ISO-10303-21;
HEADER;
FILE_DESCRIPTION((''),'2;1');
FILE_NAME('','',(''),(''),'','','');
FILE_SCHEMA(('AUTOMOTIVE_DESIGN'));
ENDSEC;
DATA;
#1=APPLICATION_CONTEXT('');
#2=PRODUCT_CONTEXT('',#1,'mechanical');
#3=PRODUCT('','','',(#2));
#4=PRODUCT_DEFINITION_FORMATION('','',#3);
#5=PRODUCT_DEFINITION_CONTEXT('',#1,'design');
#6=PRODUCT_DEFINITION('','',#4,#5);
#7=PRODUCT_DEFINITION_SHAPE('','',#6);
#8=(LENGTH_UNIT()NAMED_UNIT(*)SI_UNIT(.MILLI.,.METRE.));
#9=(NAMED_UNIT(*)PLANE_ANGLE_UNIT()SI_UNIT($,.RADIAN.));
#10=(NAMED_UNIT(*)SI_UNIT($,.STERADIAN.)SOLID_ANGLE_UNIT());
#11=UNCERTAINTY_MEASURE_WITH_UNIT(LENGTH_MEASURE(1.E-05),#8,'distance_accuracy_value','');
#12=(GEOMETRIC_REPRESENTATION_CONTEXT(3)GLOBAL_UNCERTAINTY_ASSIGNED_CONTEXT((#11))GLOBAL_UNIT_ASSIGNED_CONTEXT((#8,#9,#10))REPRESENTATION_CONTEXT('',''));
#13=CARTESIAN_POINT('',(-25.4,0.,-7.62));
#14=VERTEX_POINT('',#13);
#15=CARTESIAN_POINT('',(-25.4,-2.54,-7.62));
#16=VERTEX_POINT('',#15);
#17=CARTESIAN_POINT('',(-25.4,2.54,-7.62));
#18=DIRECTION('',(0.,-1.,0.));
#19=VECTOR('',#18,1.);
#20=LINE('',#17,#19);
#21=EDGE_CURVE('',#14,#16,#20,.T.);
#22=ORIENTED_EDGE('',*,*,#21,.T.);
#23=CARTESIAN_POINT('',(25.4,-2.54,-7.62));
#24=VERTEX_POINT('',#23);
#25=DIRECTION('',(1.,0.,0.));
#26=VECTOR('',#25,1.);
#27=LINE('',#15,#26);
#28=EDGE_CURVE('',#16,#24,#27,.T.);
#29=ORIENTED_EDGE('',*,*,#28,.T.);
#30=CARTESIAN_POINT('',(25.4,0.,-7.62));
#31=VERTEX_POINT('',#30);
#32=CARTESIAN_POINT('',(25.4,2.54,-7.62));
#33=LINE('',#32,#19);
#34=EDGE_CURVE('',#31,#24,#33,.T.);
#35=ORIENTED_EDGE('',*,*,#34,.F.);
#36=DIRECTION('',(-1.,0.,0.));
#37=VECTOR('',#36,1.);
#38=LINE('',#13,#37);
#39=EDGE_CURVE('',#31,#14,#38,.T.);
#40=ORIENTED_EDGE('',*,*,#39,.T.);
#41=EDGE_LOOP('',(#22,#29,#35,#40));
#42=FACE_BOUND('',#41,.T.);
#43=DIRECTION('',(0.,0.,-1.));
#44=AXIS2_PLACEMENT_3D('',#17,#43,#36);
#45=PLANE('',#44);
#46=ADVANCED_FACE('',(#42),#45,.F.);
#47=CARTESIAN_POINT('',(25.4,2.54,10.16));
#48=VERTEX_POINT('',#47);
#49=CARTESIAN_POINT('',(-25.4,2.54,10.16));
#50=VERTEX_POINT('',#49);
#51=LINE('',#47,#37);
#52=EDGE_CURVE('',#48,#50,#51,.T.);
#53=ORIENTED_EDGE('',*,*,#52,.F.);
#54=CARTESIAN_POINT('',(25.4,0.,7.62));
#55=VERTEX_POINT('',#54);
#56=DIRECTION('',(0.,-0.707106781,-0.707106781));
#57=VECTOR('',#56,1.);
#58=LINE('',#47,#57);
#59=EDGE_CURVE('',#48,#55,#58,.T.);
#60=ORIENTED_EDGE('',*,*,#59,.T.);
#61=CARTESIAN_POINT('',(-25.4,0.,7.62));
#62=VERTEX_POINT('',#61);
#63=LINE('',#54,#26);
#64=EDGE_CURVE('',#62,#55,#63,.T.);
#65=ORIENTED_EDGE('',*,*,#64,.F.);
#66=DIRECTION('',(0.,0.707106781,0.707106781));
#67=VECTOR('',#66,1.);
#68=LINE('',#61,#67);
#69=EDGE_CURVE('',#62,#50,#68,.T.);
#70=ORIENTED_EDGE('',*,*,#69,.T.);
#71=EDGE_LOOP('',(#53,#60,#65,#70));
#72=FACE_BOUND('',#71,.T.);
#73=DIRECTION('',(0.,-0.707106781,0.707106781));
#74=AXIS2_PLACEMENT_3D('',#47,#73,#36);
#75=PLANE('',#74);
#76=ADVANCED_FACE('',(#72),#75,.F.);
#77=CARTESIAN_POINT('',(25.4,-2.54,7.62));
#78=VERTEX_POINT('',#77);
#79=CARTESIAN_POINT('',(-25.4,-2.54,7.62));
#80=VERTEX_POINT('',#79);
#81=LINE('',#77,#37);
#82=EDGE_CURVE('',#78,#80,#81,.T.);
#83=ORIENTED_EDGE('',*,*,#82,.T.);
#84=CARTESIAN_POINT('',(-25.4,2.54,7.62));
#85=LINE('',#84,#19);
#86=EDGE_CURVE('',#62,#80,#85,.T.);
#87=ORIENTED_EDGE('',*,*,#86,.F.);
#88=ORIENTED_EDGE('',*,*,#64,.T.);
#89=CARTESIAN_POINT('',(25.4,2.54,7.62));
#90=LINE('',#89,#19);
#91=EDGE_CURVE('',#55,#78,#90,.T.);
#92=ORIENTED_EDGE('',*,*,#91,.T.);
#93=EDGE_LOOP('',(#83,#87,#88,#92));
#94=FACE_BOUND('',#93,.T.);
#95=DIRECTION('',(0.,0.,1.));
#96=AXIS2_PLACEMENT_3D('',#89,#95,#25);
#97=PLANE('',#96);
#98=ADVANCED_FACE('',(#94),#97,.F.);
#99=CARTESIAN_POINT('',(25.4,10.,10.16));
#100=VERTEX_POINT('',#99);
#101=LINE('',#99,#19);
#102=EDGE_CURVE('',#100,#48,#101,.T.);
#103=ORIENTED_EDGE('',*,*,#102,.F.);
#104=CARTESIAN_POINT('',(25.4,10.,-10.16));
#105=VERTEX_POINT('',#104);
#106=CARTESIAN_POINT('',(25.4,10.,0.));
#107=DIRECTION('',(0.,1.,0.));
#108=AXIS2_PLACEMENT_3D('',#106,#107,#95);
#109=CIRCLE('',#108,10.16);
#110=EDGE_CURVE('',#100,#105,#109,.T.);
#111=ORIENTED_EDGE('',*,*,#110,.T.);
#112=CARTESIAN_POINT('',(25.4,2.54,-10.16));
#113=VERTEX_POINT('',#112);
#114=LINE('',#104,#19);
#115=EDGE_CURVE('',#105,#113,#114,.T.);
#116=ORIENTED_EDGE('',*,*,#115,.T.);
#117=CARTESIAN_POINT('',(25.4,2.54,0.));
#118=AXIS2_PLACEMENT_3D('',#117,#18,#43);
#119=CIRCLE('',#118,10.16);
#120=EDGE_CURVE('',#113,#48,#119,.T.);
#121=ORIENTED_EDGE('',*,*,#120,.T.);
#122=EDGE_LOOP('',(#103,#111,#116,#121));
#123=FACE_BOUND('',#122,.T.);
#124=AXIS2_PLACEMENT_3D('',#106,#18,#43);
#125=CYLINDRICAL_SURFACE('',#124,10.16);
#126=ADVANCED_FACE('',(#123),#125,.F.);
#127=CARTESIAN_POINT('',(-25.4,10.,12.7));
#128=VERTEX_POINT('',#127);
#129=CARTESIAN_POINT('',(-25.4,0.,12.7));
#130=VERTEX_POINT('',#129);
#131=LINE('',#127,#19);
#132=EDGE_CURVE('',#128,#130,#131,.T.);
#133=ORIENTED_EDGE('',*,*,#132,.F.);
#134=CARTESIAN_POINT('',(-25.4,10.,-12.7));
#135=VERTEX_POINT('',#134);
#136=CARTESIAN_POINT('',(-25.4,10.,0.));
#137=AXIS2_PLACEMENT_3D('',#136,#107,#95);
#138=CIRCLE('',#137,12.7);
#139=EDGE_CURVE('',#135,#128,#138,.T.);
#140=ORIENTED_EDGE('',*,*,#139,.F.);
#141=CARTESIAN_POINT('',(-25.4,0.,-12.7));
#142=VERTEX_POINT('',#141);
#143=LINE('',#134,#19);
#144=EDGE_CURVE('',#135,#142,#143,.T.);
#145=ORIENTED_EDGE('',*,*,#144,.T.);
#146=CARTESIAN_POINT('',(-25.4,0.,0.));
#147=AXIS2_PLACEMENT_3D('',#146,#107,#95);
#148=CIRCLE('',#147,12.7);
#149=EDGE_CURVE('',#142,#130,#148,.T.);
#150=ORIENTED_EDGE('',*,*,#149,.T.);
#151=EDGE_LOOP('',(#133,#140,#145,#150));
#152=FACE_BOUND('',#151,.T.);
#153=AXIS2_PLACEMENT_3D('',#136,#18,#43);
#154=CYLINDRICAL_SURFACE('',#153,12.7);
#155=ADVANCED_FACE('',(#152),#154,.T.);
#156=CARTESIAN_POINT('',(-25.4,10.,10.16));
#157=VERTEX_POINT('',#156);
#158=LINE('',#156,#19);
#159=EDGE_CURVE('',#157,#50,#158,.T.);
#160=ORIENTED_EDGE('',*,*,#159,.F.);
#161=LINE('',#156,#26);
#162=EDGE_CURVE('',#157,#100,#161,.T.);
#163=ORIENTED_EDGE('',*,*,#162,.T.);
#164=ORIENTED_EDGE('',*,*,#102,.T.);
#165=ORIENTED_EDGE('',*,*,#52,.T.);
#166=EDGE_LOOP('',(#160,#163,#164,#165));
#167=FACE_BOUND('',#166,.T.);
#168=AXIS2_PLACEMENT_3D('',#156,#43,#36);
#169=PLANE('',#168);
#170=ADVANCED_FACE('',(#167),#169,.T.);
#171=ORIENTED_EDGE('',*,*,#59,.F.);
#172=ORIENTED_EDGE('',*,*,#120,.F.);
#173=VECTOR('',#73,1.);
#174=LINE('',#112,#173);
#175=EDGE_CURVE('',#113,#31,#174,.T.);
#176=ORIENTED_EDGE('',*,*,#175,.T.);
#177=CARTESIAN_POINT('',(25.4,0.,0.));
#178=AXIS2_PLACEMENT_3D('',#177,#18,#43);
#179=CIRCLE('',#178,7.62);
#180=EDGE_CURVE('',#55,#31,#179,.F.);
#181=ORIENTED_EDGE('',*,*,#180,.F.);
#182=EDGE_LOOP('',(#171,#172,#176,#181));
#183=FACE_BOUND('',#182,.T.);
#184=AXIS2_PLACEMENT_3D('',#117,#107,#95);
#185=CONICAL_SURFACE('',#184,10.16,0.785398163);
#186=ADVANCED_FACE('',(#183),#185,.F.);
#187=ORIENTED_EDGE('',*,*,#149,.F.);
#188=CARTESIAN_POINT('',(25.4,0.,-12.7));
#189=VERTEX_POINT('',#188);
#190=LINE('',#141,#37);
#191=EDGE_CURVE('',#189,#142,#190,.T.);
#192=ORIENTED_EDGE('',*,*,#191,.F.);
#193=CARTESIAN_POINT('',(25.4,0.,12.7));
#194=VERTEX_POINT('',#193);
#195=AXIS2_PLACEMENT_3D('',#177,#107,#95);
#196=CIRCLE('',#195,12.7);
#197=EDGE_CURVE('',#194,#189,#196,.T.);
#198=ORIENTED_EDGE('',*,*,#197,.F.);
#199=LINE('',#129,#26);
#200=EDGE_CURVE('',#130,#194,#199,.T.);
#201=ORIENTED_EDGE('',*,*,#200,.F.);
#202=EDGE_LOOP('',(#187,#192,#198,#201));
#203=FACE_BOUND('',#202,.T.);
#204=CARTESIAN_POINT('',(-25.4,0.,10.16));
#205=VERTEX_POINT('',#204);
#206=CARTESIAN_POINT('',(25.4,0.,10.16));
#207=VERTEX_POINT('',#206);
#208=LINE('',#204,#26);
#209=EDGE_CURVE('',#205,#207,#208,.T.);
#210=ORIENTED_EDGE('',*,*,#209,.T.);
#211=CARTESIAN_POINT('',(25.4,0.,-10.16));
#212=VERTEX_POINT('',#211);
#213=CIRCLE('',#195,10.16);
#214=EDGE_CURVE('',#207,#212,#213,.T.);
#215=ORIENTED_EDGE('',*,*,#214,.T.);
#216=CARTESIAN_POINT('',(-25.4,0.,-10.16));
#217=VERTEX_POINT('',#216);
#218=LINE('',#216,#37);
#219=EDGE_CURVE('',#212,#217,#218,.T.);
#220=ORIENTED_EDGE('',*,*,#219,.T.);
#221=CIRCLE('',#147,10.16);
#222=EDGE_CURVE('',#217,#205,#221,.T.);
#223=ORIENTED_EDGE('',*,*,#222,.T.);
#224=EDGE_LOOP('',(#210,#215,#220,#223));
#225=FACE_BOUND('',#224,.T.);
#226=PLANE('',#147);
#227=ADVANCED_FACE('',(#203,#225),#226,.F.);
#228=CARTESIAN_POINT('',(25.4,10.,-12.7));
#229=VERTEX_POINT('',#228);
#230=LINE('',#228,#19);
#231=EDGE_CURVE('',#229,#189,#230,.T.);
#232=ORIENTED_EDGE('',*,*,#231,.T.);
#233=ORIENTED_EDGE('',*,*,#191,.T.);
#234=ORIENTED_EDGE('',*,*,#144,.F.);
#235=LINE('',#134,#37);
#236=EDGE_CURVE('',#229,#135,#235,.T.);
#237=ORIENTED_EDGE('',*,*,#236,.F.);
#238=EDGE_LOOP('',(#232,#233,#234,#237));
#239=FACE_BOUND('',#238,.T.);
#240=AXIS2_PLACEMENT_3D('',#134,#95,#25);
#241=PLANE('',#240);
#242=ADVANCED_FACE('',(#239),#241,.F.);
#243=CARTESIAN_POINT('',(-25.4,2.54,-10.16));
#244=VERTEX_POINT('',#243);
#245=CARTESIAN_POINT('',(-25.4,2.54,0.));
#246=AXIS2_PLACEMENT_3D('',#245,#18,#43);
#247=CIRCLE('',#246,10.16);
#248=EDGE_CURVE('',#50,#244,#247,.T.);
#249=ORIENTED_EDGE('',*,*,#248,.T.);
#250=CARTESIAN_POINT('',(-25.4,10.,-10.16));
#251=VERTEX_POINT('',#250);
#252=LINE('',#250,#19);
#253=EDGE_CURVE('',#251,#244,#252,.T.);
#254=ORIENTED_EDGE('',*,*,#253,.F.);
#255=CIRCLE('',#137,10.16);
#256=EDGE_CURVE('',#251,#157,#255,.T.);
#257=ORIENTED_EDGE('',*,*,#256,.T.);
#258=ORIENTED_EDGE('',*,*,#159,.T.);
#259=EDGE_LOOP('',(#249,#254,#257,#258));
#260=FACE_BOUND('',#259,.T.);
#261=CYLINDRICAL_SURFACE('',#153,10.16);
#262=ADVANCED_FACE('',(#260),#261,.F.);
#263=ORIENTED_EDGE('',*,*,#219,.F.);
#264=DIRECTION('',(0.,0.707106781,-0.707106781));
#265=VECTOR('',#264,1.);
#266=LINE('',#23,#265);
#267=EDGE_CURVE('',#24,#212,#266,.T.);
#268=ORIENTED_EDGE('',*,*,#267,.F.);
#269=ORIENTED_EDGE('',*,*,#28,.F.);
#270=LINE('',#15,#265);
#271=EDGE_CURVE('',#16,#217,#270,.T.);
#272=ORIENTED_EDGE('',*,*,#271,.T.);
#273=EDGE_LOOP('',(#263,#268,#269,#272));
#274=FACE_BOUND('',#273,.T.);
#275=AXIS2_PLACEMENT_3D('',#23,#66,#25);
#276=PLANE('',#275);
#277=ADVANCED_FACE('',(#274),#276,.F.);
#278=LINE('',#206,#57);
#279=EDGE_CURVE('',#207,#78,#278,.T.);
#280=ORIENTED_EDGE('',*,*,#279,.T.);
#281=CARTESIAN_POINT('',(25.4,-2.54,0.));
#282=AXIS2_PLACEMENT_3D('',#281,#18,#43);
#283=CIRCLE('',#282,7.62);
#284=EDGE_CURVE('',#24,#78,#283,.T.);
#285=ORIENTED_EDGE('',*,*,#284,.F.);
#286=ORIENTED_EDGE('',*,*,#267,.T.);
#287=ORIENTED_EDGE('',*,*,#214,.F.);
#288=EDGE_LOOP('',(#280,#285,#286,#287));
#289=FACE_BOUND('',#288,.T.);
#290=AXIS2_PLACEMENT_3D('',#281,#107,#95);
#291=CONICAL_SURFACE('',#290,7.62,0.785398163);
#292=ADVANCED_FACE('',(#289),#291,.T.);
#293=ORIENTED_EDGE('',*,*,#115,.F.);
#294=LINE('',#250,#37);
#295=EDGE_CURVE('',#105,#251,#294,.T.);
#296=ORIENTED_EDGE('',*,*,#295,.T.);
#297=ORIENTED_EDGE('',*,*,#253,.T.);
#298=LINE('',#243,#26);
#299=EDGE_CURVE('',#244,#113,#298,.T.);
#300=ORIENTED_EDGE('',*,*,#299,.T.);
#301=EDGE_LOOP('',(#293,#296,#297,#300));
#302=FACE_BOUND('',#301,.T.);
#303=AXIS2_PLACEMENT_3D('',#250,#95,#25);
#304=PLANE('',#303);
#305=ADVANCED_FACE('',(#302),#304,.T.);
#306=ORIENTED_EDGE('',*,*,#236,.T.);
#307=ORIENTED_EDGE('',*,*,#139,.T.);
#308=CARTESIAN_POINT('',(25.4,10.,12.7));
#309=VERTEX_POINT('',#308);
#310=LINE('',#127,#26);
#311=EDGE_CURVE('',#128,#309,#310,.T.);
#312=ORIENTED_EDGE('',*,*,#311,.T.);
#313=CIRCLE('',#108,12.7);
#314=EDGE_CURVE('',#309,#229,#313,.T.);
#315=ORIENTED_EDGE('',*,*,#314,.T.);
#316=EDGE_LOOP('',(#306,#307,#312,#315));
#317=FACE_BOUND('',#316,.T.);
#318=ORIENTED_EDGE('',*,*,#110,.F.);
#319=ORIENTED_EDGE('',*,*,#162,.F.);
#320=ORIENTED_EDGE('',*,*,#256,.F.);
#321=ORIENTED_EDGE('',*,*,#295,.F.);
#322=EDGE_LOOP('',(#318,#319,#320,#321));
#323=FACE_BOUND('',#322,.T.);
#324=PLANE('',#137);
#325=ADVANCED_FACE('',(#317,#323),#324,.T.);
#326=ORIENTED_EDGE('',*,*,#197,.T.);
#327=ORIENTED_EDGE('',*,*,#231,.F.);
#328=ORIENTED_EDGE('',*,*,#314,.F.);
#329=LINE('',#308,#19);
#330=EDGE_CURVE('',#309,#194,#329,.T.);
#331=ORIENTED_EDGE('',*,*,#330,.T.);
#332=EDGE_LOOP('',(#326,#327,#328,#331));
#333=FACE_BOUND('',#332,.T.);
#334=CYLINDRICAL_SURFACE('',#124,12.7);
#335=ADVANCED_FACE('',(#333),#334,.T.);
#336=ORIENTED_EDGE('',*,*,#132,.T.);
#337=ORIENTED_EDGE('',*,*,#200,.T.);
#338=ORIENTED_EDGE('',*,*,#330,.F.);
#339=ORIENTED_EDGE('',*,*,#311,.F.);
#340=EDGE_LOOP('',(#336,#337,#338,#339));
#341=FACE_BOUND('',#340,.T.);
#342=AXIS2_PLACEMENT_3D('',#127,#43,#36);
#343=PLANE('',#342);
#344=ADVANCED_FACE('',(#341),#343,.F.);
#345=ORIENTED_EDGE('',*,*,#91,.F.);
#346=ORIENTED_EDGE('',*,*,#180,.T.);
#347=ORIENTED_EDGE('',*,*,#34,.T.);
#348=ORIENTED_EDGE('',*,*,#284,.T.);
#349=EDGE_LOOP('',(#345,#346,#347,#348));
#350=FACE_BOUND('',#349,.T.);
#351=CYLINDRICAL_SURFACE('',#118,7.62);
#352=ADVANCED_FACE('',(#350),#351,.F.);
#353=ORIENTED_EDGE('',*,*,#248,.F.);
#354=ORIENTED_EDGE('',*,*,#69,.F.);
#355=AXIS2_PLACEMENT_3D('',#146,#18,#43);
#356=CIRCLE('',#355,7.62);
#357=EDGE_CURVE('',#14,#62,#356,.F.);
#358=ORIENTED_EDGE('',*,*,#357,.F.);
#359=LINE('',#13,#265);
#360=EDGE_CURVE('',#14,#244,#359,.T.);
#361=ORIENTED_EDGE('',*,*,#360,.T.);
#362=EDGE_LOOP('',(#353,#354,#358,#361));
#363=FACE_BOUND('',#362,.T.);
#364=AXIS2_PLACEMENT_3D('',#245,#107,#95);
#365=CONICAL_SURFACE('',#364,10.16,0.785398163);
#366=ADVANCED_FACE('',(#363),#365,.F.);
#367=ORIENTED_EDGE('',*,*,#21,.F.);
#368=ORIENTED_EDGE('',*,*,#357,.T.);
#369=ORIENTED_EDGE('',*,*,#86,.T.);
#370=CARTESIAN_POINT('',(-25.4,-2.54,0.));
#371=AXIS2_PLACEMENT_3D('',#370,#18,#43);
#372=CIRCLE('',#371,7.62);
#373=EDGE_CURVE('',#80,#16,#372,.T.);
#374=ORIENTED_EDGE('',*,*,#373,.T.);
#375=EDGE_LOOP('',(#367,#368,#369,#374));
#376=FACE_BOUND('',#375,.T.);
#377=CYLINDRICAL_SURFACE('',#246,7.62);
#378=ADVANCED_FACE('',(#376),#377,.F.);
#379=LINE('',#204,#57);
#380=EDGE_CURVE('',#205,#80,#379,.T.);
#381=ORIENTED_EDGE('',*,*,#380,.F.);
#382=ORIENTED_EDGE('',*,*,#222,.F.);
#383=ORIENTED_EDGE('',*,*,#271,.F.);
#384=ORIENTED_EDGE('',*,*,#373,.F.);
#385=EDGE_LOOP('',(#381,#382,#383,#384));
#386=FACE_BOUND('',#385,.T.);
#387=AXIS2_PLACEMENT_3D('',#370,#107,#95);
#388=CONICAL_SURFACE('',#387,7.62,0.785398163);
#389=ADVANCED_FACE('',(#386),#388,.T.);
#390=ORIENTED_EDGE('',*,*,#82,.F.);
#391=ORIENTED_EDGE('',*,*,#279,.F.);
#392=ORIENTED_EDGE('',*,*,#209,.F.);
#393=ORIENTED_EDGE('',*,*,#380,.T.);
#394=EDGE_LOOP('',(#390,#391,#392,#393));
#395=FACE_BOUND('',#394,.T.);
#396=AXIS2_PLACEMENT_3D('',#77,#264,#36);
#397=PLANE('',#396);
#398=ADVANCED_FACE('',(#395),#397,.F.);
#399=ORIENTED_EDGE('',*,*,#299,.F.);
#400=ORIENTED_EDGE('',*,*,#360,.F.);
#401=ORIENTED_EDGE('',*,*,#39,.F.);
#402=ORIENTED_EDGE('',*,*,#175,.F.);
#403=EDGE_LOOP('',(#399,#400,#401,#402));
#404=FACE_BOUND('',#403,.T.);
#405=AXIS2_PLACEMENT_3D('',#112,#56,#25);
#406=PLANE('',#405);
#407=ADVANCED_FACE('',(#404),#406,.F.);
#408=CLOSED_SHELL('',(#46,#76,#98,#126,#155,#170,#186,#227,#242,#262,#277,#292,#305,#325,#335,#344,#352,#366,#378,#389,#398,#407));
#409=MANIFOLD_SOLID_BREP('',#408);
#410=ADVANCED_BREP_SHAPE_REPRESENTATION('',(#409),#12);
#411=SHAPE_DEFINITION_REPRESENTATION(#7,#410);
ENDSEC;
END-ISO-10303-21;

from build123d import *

# Parameters (mm, degrees)
BOSS_EXTRUDE1_DEPTH      = 10
BOSS_EXTRUDE2_DEPTH      = 2.54
BOSS_EXTRUDE2_DEPTH_BACK = 2.54
CHAMFER1_SIZE            = 2.54


with BuildPart() as part:
    # Sketch1 → Boss-Extrude1 (new body)
    with BuildSketch(Plane(origin=(0, 0, 0), x_dir=(1, 0, 0), z_dir=(0, 1, 0))):
        with BuildLine():
            Line((-25.4, -12.7), (25.4, -12.7))
            ThreePointArc((25.4, -12.7), (38.1, 0), (25.4, 12.7))
            Line((25.4, 12.7), (-25.4, 12.7))
            ThreePointArc((-25.4, 12.7), (-38.1, 0), (-25.4, -12.7))
        make_face()
        with BuildLine():
            Line((-25.4, -10.16), (25.4, -10.16))
            ThreePointArc((25.4, -10.16), (35.56, 0), (25.4, 10.16))
            Line((25.4, 10.16), (-25.4, 10.16))
            ThreePointArc((-25.4, 10.16), (-35.56, 0), (-25.4, -10.16))
        make_face(mode=Mode.SUBTRACT)
    extrude(amount=BOSS_EXTRUDE1_DEPTH)

    # Sketch3 → Boss-Extrude2 (add, two sides: drawn at the far end of the back side and taken through both)
    with BuildSketch(Plane.XZ.offset(-BOSS_EXTRUDE2_DEPTH_BACK)):
        with BuildLine():
            Line((25.4, 10.16), (-25.4, 10.16))
            ThreePointArc((-25.4, 10.16), (-35.56, 0), (-25.4, -10.16))
            Line((-25.4, -10.16), (25.4, -10.16))
            ThreePointArc((25.4, -10.16), (35.56, 0), (25.4, 10.16))
        make_face()
        with BuildLine():
            Line((-25.4, -7.62), (25.4, -7.62))
            ThreePointArc((25.4, -7.62), (33.02, 0), (25.4, 7.62))
            Line((25.4, 7.62), (-25.4, 7.62))
            ThreePointArc((-25.4, 7.62), (-33.02, 0), (-25.4, -7.62))
        make_face(mode=Mode.SUBTRACT)
    extrude(amount=BOSS_EXTRUDE2_DEPTH + BOSS_EXTRUDE2_DEPTH_BACK)

    # Chamfer1
    chamfer1_edges = [part.edges().sort_by_distance(p)[0] for p in [
        (35.56, -2.54, 0),
        (0, -2.54, 10.16),
        (0, -2.54, -10.16),
        (-35.56, -2.54, 0),
        (0, 2.54, 7.62),
        (-33.02, 2.54, 0),
        (33.02, 2.54, 0),
        (0, 2.54, -7.62),
    ]]
    chamfer(chamfer1_edges, length=CHAMFER1_SIZE - 0.0001)  # a hair under: the kernel refuses the full size


solid = part.part
